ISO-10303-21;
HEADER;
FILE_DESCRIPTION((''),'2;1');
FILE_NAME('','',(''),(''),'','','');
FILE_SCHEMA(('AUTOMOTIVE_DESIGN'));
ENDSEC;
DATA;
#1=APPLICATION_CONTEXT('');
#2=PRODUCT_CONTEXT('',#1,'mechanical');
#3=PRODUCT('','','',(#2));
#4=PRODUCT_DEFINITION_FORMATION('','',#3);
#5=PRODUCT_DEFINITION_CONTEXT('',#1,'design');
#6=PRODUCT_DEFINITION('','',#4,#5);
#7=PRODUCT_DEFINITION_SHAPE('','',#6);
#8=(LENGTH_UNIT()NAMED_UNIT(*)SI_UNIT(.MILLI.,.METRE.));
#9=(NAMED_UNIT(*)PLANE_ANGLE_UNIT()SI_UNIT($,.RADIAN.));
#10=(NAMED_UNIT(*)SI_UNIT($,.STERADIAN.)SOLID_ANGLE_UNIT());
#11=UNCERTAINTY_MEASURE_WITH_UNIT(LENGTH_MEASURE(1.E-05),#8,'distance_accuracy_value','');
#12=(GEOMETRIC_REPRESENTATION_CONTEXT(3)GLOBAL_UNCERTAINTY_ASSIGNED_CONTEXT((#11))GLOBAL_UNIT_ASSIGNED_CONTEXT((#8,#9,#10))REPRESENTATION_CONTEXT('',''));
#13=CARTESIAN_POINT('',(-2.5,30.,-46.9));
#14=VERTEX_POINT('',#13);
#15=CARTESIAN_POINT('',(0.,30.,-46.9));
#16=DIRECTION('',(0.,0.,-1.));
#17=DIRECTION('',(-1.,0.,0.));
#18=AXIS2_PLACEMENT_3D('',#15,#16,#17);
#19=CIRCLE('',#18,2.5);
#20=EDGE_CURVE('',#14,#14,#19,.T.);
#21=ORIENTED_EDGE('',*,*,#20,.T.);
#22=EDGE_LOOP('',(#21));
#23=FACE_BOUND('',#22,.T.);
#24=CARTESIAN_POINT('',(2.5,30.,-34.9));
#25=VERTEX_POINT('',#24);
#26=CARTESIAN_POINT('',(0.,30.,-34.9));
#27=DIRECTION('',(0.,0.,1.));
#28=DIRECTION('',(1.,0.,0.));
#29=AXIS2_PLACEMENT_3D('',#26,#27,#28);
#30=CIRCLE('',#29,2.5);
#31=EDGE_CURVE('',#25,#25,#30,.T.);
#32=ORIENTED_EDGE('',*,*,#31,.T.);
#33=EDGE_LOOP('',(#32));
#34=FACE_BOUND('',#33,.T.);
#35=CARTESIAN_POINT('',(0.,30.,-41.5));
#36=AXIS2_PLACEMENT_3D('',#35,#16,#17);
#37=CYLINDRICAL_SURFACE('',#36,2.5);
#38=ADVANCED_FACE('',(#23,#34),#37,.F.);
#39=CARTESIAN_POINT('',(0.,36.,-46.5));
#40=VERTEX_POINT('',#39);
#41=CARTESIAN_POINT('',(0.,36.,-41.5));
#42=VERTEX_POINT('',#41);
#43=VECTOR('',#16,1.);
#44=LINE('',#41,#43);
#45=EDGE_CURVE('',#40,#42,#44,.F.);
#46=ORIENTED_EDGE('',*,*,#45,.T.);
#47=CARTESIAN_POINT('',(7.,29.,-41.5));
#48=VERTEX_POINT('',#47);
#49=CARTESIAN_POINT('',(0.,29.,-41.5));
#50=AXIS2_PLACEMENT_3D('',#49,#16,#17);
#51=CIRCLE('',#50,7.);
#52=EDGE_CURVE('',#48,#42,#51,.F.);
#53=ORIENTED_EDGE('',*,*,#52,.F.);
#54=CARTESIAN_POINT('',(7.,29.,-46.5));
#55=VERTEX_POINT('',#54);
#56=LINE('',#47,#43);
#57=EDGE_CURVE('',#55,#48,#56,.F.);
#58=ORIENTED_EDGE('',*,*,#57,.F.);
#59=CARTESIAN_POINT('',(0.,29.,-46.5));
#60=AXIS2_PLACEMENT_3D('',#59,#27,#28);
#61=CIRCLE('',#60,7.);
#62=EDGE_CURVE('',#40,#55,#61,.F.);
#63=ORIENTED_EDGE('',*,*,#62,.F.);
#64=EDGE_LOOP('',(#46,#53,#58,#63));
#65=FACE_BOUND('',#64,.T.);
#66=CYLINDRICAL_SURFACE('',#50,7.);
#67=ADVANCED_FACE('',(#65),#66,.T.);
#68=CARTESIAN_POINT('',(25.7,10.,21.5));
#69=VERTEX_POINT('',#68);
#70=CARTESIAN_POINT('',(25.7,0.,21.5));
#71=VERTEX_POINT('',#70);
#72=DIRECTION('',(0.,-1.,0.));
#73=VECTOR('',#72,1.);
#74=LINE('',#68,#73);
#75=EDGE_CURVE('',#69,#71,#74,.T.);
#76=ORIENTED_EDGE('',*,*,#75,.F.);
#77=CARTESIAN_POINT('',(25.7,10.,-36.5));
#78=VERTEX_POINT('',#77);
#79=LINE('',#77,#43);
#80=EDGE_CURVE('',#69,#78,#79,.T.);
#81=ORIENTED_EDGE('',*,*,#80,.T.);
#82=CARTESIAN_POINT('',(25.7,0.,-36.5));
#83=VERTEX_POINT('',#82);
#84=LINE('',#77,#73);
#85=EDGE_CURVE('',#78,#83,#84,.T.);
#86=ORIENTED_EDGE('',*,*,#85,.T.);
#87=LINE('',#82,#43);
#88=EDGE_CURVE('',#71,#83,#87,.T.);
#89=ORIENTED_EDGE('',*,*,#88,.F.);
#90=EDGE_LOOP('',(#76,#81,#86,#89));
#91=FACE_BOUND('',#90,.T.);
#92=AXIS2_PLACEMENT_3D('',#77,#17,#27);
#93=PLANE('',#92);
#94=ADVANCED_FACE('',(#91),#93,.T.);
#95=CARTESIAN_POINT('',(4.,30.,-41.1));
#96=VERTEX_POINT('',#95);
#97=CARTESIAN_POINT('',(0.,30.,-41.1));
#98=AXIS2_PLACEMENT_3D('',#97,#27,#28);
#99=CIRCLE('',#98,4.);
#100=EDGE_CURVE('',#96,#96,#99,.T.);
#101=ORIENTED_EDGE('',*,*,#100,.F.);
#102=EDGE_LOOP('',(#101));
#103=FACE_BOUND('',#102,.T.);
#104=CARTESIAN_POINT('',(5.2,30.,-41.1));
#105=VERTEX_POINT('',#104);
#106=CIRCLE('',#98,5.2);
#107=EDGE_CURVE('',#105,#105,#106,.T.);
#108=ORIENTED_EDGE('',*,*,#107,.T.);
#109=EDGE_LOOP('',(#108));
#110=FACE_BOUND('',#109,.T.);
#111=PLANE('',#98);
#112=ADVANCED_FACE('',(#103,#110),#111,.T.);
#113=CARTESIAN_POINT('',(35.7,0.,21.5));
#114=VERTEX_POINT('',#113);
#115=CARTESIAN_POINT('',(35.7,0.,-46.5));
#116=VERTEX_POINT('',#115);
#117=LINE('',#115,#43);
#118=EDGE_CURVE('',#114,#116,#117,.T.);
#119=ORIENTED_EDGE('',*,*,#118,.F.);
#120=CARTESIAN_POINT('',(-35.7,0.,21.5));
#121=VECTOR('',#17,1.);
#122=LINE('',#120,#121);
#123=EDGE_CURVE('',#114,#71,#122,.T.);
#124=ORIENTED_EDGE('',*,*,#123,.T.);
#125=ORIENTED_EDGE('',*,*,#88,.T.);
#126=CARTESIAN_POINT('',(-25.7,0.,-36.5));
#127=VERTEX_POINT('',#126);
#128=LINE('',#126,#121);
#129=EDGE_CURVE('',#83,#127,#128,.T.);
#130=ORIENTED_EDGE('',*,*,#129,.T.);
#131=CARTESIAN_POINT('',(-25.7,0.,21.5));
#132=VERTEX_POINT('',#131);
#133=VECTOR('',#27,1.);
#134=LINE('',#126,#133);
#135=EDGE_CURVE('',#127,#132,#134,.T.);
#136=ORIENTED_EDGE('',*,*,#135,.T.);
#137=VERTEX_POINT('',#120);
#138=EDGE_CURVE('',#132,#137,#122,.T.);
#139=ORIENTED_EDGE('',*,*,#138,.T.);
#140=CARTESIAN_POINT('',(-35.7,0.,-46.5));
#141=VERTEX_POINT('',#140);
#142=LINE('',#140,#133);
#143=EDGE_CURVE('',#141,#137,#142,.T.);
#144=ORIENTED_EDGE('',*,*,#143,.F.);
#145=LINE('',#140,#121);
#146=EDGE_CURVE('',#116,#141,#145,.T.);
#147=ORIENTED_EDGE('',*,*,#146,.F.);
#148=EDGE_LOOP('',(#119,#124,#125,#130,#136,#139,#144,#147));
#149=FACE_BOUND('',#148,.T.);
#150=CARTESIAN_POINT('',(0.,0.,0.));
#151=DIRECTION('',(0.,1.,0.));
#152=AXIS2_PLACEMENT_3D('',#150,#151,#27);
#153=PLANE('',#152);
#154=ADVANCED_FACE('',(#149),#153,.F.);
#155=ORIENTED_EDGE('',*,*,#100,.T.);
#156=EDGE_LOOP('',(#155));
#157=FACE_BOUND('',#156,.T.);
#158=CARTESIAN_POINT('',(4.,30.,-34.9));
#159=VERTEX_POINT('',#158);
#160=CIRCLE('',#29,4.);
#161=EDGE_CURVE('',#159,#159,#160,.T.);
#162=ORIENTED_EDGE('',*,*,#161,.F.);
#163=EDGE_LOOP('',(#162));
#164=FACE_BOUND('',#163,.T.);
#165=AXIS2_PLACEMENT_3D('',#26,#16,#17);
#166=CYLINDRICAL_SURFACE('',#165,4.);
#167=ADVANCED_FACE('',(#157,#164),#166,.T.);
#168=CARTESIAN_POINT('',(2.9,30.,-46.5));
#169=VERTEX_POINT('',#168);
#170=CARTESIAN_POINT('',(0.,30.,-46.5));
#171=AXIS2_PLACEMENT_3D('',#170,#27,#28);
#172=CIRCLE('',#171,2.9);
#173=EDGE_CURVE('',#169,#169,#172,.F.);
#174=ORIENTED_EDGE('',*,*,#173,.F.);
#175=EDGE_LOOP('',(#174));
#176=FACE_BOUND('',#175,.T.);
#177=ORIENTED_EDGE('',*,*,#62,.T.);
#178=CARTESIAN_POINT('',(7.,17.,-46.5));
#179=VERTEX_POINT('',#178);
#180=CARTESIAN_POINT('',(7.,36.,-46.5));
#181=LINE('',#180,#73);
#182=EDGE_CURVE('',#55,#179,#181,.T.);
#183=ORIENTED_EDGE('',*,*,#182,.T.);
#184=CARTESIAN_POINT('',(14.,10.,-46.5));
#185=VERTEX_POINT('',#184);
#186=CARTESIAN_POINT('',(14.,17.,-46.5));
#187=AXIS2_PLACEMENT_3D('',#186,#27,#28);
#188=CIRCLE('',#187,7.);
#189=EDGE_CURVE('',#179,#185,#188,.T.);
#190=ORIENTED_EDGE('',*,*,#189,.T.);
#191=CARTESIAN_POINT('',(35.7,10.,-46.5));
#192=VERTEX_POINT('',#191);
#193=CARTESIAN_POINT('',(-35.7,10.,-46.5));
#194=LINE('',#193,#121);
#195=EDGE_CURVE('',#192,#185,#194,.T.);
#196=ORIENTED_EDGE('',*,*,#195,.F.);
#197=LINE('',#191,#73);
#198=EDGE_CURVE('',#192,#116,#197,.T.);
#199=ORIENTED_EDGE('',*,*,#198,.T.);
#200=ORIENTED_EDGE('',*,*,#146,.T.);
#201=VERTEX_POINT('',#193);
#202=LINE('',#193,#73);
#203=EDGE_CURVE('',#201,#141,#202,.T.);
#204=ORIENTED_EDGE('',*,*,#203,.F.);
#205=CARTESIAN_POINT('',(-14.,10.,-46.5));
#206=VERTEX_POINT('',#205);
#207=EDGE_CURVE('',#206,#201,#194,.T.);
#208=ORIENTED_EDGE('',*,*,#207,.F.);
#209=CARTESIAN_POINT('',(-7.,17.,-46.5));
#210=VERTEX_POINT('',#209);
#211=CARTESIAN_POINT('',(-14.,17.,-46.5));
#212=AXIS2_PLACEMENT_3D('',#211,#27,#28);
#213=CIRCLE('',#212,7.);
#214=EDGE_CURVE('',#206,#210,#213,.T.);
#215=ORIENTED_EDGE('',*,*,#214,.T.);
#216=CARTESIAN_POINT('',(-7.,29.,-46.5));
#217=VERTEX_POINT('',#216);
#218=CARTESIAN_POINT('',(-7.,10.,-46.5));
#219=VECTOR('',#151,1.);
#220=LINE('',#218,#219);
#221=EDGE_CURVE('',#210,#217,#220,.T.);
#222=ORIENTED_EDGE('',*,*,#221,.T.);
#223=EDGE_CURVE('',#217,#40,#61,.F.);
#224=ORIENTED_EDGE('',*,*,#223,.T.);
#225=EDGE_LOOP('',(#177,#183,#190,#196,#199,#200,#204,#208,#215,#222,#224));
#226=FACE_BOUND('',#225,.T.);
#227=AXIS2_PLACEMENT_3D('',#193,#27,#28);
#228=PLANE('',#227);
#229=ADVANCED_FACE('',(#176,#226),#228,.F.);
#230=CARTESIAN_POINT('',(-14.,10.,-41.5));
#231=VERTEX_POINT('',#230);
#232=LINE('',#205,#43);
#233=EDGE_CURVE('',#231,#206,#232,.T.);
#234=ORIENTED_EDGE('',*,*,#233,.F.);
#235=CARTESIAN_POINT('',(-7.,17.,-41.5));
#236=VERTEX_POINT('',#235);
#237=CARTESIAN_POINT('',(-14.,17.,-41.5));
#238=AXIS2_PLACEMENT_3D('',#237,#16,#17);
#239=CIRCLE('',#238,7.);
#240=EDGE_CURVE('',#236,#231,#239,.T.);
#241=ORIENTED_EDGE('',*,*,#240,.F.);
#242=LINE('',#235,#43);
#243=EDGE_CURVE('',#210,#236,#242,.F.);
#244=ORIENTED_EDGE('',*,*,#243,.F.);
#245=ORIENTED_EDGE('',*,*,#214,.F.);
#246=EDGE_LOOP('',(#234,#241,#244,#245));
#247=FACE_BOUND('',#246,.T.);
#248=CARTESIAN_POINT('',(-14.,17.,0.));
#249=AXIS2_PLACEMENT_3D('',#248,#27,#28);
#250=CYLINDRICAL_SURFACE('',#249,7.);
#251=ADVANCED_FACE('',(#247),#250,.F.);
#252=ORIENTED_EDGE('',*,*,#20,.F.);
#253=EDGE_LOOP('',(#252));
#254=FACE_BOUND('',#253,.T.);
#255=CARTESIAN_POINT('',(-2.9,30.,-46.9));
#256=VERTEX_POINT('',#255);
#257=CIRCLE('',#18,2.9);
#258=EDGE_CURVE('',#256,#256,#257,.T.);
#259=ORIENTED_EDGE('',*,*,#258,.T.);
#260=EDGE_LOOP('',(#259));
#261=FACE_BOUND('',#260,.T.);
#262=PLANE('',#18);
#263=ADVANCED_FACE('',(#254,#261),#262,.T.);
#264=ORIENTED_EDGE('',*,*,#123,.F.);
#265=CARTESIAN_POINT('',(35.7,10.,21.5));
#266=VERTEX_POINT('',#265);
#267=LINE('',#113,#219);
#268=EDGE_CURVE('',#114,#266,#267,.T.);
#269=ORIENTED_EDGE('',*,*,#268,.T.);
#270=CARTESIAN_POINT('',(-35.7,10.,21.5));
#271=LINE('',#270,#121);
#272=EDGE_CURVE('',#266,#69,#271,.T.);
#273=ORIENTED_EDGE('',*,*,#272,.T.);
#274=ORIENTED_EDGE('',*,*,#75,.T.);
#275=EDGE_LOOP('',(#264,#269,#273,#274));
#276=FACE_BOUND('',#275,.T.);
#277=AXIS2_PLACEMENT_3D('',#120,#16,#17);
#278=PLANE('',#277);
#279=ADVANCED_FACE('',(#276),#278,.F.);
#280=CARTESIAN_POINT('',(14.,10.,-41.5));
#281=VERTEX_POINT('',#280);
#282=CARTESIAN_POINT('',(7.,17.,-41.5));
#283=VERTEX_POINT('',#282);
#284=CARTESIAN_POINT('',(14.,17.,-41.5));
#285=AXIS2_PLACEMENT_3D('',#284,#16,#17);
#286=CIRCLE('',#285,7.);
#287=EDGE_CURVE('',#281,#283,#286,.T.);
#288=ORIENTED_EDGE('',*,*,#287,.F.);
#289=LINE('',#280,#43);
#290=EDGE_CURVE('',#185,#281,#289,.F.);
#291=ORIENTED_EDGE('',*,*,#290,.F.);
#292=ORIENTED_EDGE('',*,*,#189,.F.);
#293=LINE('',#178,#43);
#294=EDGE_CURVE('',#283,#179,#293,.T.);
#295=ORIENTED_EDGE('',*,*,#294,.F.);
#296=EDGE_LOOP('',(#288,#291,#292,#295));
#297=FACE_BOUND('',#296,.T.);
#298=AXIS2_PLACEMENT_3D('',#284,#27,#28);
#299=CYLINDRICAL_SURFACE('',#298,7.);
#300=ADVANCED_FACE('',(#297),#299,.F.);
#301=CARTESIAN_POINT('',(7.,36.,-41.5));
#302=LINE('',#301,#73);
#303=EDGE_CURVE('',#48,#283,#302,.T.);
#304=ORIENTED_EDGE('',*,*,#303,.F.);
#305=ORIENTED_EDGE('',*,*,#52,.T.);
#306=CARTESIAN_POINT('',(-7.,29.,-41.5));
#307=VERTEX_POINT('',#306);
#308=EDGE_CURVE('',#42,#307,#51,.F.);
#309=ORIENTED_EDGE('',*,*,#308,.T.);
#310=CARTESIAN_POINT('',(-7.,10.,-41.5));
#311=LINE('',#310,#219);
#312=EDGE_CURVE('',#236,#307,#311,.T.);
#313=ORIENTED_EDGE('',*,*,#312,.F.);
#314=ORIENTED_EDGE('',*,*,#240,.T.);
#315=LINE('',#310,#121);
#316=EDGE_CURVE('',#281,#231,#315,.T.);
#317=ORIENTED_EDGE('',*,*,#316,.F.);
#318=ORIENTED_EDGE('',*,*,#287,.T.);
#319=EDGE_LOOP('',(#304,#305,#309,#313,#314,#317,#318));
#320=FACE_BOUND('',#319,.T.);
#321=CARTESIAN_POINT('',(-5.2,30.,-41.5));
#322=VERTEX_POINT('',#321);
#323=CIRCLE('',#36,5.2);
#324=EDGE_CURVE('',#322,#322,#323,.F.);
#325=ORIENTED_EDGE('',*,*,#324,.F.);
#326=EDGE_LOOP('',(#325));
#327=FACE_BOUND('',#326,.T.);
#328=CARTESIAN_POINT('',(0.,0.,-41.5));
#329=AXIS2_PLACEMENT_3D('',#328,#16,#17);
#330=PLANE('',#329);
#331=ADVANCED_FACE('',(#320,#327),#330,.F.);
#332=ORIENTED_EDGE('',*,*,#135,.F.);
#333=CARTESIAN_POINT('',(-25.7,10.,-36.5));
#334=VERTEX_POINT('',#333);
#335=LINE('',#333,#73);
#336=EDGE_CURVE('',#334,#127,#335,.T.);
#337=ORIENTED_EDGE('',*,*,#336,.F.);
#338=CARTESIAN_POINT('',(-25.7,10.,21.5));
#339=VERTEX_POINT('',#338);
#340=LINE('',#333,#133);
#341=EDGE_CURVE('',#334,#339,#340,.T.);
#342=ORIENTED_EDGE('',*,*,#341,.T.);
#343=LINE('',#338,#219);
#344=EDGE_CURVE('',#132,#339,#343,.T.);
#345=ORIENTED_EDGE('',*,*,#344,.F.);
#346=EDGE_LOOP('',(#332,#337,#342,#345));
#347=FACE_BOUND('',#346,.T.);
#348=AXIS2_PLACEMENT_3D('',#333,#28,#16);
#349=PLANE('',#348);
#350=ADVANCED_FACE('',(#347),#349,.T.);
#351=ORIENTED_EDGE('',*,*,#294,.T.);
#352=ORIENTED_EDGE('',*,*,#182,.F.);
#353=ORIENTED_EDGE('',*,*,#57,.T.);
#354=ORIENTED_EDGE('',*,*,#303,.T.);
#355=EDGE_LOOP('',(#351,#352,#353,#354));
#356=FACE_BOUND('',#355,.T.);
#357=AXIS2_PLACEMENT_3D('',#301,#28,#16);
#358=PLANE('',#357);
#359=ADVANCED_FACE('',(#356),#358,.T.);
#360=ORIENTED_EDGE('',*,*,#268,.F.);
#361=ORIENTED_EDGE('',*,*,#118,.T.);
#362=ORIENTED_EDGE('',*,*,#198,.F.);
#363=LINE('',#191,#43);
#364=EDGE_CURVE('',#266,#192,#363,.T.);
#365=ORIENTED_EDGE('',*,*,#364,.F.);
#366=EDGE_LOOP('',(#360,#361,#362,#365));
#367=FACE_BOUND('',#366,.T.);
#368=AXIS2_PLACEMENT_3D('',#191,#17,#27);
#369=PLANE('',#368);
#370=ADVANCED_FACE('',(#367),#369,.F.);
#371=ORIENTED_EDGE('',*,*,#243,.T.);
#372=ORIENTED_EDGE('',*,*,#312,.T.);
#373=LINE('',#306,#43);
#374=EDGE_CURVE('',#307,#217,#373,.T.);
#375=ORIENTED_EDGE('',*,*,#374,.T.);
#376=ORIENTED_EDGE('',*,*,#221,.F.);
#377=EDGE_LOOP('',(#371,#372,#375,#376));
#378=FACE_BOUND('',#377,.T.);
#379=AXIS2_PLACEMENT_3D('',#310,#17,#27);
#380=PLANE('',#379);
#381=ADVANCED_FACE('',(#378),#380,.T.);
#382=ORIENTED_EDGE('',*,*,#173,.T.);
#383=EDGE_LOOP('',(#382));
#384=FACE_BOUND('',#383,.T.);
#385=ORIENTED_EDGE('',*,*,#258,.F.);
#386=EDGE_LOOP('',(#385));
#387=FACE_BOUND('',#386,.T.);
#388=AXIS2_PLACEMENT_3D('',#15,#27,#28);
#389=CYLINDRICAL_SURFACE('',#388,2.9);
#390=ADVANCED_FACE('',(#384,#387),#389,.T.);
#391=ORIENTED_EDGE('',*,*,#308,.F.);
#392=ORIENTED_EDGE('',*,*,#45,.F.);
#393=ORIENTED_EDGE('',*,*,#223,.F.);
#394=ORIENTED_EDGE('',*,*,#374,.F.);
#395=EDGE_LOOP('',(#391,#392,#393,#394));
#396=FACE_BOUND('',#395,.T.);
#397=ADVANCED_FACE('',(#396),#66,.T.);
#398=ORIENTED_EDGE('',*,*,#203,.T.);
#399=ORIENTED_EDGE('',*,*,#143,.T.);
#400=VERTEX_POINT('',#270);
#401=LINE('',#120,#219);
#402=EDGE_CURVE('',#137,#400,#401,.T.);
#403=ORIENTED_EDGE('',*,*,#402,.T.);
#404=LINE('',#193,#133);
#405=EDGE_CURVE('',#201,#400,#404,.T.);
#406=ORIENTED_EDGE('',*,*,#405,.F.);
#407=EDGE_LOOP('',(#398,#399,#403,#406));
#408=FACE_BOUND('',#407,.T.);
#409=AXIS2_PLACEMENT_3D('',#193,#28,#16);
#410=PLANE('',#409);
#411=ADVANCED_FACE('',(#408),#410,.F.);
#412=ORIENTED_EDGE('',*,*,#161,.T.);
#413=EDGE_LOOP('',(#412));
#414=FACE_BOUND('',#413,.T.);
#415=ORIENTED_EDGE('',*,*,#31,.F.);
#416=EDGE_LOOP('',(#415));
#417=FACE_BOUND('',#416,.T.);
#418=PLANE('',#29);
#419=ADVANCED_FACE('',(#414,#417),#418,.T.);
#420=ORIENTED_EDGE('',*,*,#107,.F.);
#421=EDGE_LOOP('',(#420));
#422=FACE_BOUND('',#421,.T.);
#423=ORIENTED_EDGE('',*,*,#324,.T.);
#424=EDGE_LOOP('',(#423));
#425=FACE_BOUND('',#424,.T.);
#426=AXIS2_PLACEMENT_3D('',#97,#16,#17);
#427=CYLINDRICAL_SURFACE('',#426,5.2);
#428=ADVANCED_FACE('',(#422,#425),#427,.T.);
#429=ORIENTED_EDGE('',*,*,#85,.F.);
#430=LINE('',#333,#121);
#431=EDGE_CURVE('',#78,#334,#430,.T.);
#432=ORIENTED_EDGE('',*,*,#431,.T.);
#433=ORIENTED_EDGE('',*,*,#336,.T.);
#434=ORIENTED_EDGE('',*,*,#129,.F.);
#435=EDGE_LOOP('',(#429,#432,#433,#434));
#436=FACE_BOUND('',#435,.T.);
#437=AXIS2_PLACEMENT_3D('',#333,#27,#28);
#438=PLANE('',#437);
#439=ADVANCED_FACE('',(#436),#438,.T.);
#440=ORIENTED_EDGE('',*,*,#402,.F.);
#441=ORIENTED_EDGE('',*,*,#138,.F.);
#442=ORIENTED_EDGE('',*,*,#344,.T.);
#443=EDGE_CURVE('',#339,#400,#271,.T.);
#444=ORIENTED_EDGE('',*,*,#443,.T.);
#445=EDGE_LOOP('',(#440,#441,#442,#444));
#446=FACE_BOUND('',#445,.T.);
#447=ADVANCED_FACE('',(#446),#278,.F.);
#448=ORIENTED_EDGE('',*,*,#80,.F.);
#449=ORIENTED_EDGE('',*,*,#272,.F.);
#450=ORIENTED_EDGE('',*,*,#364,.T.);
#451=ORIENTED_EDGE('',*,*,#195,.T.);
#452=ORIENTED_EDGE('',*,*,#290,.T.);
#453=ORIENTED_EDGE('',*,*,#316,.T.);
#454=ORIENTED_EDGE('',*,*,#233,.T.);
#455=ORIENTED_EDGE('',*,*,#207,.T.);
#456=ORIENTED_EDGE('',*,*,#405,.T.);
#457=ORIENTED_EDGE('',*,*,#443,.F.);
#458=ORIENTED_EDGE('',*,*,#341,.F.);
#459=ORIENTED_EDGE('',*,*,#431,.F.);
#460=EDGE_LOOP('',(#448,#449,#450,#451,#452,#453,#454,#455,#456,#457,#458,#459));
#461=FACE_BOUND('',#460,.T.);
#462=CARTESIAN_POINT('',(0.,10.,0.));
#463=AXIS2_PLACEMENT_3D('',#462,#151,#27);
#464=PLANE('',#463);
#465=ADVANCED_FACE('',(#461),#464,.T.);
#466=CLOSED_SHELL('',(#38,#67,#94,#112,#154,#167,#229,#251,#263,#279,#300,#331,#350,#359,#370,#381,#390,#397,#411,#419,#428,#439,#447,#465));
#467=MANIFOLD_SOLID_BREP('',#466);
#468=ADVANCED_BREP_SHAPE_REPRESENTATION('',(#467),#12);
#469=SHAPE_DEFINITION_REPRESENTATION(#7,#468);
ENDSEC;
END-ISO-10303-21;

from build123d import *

# Parameters (mm, degrees)
SKETCH2_W           = 71.4
SKETCH2_H           = 93
SKETCH2_W_2         = 51.4
SKETCH2_H_2         = 73
BOSS_EXTRUDE1_DEPTH = 10
SKETCH3_W           = 14
SKETCH3_H           = 26
SKETCH3_R           = 2.5
BOSS_EXTRUDE2_DEPTH = 5
SKETCH4_R           = 4
SKETCH4_R_2         = 2.5
BOSS_EXTRUDE3_DEPTH = 6.6
SKETCH5_W           = 51.4
SKETCH5_H           = 10
CUT_EXTRUDE1_DEPTH  = 65.130647899
SKETCH6_R           = 5.2
SKETCH6_R_2         = 4
BOSS_EXTRUDE4_DEPTH = 0.4
SKETCH7_W           = 71.4
SKETCH7_H           = 25
CUT_EXTRUDE2_DEPTH  = 65.130647899
BOSS_EXTRUDE5_START = 0.4
SKETCH8_R           = 2.9
SKETCH8_R_2         = 2.5
BOSS_EXTRUDE5_DEPTH = 0.4
FILLET1_START       = -46.5
FILLET1_DEPTH       = 5
FILLET1_2_DEPTH     = 5


with BuildPart() as part:
    # Sketch2 → Boss-Extrude1 (new body)
    with BuildSketch(Plane(origin=(0, 0, 0), x_dir=(1, 0, 0), z_dir=(0, 1, 0))):
        Rectangle(SKETCH2_W, SKETCH2_H)
        Rectangle(SKETCH2_W_2, SKETCH2_H_2, mode=Mode.SUBTRACT)
    extrude(amount=BOSS_EXTRUDE1_DEPTH)

    # Sketch3 → Boss-Extrude2 (add)
    with BuildSketch(Plane(origin=(0, 0, -46.5), x_dir=(-1, 0, 0), z_dir=(0, 0, -1))):
        with Locations((0, 23)):
            Rectangle(SKETCH3_W, SKETCH3_H)
        with Locations((0, 30)):
            Circle(SKETCH3_R, mode=Mode.SUBTRACT)
    extrude(amount=-BOSS_EXTRUDE2_DEPTH)

    # Sketch4 → Boss-Extrude3 (add)
    with BuildSketch(Plane.XY.offset(-41.5)):
        with Locations(Location((0, 30, 0), (0, 0, 180))):
            Circle(SKETCH4_R)
        with Locations(Location((0, 30, 0), (0, 0, 180))):
            Circle(SKETCH4_R_2, mode=Mode.SUBTRACT)
    extrude(amount=BOSS_EXTRUDE3_DEPTH)

    # Sketch5 → Cut-Extrude1 (cut, through all)
    with BuildSketch(Plane(origin=(0, 10, 0), x_dir=(1, 0, 0), z_dir=(0, 1, 0))):
        with Locations((0, -41.5)):
            Rectangle(SKETCH5_W, SKETCH5_H)
    extrude(amount=-CUT_EXTRUDE1_DEPTH, mode=Mode.SUBTRACT)

    # Sketch6 → Boss-Extrude4 (add)
    with BuildSketch(Plane.XY.offset(-41.5)):
        with Locations(Location((0, 30, 0), (0, 0, 180))):
            Circle(SKETCH6_R)
        with Locations((0, 30)):
            Circle(SKETCH6_R_2, mode=Mode.SUBTRACT)
    extrude(amount=BOSS_EXTRUDE4_DEPTH)

    # Sketch7 → Cut-Extrude2 (cut, through all)
    with BuildSketch(Plane(origin=(0, 10, 0), x_dir=(1, 0, 0), z_dir=(0, 1, 0))):
        with Locations((0, -34)):
            Rectangle(SKETCH7_W, SKETCH7_H)
    extrude(amount=-CUT_EXTRUDE2_DEPTH, mode=Mode.SUBTRACT)

    # Sketch8 → Boss-Extrude5 (add)
    with BuildSketch(Plane(origin=(0, 0, -46.5), x_dir=(-1, 0, 0), z_dir=(0, 0, -1)).offset(BOSS_EXTRUDE5_START)):
        with Locations(Location((0, 30, 0), (0, 0, 180))):
            Circle(SKETCH8_R)
        with Locations((0, 30)):
            Circle(SKETCH8_R_2, mode=Mode.SUBTRACT)
    extrude(amount=-BOSS_EXTRUDE5_DEPTH)

    # Fillet1: read off the stored shape, not the designer's step
    # Fillet1 outline → Fillet1 (cut)
    with BuildSketch(Plane.XY.offset(FILLET1_START)):
        with BuildLine():
            ThreePointArc((0, 36), (4.949747468, 33.949747468), (7, 29))
            Line((7, 29), (7, 36))
            Line((7, 36), (0, 36))
        make_face()
        with BuildLine():
            ThreePointArc((-7, 29), (-4.949747468, 33.949747468), (0, 36))
            Line((0, 36), (-7, 36))
            Line((-7, 36), (-7, 29))
        make_face()
    extrude(amount=FILLET1_DEPTH, mode=Mode.SUBTRACT)

    # Fillet1 2 outline → Fillet1 2 (add)
    with BuildSketch(Plane.XY.offset(FILLET1_START)):
        with BuildLine():
            ThreePointArc((14, 10), (9.050252532, 12.050252532), (7, 17))
            Line((7, 17), (7, 10))
            Line((7, 10), (14, 10))
        make_face()
        with BuildLine():
            Line((-14, 10), (-7, 10))
            Line((-7, 10), (-7, 17))
            ThreePointArc((-7, 17), (-9.050252532, 12.050252532), (-14, 10))
        make_face()
    extrude(amount=FILLET1_2_DEPTH)


solid = part.part
